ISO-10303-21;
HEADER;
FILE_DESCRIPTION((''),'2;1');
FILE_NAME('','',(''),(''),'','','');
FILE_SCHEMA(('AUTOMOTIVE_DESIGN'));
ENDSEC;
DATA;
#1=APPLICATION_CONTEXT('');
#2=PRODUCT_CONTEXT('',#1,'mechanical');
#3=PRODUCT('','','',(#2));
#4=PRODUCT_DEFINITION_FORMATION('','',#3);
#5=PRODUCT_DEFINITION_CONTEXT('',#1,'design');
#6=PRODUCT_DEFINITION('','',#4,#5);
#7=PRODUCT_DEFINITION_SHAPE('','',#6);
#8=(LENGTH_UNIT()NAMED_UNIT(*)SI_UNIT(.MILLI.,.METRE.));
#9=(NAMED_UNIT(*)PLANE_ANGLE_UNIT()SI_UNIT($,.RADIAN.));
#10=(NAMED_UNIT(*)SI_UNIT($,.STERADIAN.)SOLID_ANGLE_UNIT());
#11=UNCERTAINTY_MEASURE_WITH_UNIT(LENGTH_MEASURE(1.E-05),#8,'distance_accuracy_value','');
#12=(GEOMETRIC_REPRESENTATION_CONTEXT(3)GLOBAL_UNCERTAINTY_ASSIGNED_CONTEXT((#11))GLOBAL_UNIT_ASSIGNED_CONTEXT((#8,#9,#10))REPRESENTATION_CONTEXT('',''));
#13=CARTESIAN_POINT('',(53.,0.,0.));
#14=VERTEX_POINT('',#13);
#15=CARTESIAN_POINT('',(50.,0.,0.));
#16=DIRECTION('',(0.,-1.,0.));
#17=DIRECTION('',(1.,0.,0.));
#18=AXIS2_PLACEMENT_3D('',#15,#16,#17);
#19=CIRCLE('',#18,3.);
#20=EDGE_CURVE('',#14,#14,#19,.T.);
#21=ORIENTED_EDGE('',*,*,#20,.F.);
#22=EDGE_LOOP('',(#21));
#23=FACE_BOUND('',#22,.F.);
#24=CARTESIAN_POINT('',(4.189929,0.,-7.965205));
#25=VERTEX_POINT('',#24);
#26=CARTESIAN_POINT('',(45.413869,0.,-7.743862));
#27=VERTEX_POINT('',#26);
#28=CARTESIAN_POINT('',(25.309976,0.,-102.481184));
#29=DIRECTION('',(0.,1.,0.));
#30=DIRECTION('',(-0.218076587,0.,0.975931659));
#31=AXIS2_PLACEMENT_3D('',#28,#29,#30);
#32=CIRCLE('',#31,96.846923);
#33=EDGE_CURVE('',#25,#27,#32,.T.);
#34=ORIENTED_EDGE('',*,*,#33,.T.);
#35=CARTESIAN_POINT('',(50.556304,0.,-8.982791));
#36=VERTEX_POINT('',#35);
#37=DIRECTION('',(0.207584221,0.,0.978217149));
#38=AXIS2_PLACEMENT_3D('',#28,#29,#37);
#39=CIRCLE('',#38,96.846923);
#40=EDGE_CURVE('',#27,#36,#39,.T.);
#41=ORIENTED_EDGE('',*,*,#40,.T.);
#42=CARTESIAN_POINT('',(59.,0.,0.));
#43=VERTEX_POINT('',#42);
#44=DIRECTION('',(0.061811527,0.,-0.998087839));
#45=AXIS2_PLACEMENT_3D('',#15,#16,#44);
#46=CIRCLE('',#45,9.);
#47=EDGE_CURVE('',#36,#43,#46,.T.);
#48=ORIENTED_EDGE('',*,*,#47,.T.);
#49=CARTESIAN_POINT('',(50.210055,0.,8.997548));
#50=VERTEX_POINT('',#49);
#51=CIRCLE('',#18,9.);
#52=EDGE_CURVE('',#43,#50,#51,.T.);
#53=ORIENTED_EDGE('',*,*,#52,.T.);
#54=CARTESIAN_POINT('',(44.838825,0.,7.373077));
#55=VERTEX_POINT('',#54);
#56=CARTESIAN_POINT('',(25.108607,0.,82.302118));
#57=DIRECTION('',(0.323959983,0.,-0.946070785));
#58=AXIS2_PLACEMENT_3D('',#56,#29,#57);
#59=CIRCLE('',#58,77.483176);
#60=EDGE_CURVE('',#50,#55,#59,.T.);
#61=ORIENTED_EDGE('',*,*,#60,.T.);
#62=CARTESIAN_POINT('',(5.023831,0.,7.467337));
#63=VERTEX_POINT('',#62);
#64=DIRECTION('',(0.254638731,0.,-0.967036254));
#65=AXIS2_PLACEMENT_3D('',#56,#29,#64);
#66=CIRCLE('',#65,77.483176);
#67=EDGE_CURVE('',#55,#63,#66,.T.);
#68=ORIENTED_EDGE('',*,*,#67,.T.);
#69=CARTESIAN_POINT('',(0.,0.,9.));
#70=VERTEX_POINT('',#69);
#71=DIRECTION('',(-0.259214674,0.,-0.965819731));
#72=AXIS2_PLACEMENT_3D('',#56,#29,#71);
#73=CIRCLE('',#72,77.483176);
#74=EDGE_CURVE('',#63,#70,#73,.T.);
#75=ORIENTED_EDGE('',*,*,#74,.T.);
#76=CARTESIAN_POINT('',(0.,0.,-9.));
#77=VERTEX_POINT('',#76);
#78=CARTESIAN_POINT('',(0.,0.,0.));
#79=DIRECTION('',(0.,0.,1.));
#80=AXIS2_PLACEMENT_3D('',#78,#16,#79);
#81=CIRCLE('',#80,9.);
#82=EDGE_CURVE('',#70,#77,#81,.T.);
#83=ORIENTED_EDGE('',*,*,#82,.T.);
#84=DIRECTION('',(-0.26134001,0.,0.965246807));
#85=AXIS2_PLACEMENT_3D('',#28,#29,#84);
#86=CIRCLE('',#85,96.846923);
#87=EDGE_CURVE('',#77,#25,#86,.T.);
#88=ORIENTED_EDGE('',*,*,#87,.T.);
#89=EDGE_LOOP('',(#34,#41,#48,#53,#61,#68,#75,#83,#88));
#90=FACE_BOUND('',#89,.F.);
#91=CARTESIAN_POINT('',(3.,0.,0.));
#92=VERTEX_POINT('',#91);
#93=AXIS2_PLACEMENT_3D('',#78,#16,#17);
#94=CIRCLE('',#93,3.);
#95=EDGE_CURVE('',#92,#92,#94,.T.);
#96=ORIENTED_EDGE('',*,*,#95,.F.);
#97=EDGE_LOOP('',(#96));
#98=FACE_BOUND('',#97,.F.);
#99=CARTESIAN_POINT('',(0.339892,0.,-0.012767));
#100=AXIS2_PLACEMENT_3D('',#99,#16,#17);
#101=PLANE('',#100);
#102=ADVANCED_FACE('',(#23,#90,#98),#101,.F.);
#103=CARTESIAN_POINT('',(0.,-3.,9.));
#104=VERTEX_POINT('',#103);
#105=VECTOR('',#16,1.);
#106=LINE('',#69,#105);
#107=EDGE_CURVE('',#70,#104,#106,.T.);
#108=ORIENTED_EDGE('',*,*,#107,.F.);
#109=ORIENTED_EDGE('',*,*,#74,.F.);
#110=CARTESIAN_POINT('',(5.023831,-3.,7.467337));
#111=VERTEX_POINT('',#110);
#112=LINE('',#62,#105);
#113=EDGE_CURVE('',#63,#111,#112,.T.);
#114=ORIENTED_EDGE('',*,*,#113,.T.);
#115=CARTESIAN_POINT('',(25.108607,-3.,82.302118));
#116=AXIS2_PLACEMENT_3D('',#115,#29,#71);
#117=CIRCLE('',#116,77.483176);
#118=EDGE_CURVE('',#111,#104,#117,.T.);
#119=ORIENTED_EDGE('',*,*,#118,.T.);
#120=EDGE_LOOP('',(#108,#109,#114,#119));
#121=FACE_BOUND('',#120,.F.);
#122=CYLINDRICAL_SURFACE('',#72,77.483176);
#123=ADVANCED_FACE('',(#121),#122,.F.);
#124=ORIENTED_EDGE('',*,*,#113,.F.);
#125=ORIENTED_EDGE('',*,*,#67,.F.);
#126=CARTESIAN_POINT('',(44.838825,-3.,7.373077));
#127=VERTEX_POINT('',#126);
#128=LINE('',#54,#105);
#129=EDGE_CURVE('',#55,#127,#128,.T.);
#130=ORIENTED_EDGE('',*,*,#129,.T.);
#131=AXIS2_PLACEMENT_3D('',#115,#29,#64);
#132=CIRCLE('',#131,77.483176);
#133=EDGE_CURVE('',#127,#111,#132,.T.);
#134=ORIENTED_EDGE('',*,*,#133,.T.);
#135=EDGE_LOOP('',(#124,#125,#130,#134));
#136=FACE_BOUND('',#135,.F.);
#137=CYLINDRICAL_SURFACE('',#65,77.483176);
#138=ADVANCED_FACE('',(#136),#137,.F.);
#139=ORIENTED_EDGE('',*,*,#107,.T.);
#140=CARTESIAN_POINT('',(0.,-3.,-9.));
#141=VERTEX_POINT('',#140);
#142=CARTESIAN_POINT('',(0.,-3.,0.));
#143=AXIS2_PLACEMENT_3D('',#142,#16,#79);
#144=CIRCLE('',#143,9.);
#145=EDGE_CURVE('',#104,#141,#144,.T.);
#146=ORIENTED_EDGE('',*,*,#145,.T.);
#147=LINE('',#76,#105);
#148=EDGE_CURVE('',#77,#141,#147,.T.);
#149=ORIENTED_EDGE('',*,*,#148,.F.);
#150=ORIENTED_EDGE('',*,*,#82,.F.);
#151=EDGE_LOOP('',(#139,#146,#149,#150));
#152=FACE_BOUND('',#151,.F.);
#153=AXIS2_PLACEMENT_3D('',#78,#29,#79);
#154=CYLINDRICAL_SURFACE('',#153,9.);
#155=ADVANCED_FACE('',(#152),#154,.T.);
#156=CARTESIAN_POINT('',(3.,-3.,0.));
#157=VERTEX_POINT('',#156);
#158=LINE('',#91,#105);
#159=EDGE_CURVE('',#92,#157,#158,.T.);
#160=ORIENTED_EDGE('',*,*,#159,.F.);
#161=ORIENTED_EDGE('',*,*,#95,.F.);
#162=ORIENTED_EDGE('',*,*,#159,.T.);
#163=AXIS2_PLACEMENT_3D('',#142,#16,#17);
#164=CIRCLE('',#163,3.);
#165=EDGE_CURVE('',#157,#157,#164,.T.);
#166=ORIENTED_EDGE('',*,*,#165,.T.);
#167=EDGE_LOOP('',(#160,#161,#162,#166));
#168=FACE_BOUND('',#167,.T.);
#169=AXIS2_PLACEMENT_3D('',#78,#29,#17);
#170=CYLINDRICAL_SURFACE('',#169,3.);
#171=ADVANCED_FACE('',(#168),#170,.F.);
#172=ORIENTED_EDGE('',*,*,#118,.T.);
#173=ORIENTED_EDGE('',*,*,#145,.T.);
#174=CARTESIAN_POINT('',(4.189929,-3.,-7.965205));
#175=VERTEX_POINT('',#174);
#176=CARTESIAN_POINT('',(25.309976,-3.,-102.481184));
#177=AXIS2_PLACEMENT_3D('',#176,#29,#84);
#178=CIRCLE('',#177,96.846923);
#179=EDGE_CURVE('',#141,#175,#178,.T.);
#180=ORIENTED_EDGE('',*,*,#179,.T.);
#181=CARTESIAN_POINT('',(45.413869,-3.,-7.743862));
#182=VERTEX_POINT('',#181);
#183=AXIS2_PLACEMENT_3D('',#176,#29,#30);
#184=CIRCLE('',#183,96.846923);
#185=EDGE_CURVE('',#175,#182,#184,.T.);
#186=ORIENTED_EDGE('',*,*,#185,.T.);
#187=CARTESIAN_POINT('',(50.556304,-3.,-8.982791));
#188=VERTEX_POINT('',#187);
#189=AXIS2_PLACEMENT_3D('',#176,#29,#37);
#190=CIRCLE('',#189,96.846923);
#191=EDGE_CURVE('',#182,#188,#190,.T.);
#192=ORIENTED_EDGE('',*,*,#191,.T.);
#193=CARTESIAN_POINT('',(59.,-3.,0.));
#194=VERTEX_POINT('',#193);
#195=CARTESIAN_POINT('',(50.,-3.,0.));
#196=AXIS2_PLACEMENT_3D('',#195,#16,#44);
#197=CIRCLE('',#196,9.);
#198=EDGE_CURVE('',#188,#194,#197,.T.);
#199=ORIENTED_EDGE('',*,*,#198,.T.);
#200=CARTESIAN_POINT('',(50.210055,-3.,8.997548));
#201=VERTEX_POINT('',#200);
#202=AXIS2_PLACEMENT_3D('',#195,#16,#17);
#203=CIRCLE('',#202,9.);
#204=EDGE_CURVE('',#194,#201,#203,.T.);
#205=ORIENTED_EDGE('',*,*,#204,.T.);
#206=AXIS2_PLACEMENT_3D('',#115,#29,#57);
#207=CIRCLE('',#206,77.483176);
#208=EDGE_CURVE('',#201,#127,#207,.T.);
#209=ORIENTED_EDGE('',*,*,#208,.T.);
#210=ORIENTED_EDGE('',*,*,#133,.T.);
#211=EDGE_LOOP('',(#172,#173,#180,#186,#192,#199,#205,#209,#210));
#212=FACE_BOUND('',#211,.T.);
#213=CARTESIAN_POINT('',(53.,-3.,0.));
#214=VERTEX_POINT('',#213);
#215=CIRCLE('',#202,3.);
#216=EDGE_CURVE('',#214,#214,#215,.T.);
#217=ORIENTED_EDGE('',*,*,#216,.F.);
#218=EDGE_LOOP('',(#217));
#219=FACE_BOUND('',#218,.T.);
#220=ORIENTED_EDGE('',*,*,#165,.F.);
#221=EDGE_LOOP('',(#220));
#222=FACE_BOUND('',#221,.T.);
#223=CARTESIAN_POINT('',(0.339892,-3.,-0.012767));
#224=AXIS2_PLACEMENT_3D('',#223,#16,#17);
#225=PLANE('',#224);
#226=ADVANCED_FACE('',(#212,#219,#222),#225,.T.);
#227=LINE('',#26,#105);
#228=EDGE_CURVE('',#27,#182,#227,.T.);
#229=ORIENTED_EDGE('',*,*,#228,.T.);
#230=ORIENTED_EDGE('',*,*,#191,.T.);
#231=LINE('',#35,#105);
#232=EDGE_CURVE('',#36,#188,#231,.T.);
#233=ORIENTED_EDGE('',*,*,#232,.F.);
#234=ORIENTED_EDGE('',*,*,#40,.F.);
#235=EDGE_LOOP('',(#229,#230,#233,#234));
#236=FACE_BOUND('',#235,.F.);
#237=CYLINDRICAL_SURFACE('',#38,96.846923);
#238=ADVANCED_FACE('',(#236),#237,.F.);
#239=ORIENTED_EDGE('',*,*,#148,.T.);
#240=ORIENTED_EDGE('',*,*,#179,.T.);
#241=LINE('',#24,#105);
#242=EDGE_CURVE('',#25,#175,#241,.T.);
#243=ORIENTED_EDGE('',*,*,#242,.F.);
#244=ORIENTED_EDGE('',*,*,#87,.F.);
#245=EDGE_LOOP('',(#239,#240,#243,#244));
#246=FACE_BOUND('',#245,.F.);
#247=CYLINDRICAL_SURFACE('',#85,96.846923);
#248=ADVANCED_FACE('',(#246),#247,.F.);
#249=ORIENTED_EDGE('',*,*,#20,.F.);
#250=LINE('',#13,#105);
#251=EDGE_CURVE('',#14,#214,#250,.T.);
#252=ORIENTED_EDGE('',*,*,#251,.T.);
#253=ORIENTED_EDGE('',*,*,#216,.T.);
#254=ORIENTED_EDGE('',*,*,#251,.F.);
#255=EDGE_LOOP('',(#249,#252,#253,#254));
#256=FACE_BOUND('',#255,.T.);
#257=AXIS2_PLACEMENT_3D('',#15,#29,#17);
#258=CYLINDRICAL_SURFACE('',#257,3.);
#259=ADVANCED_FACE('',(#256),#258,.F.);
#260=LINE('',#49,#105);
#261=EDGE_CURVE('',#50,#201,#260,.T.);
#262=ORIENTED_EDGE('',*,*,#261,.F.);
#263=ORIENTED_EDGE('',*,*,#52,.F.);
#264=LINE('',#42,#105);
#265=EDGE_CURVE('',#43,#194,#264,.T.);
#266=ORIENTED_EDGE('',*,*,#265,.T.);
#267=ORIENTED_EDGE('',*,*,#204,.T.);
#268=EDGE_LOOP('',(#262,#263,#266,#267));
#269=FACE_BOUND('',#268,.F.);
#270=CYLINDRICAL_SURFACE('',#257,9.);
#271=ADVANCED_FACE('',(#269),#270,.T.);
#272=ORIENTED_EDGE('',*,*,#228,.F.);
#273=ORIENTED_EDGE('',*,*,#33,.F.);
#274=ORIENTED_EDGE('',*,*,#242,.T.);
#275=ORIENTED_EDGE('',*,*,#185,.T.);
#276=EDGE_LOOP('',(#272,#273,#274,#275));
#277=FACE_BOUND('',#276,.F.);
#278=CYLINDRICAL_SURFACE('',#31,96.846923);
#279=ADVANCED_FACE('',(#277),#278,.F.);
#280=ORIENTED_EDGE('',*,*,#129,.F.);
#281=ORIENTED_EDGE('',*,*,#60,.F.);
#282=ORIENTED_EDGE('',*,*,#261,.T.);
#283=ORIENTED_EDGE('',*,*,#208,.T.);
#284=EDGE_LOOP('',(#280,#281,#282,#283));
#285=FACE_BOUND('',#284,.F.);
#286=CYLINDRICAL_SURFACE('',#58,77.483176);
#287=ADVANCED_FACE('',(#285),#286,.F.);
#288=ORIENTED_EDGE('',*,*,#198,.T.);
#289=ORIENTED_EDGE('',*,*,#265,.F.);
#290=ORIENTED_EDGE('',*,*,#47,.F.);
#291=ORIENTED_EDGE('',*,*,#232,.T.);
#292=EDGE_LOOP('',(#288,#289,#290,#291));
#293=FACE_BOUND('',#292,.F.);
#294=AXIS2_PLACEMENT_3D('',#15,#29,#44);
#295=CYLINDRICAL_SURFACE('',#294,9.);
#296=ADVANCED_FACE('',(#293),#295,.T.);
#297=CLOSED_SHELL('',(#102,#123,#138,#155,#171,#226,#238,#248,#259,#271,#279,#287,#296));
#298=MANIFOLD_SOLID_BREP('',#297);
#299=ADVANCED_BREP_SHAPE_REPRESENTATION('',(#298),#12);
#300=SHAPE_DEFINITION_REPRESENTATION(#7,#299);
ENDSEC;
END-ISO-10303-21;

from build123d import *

# Parameters (mm, degrees)
F0_R     = 3
F1_DEPTH = 3


with BuildPart() as f1:
    # F0 (on Front) → F1 (new body)
    with BuildSketch(Plane.XZ):
        with BuildLine():
            ThreePointArc((5.0238306032, 7.4673372811), (2.4989245726, 8.1910870463), (0, 9))
            ThreePointArc((0, 9), (-9, 0), (0, -9))
            ThreePointArc((0, -9), (2.0891997796, -8.459259966), (4.1899294664, -7.9652050235))
            ThreePointArc((4.1899294664, -7.9652050235), (7.7041990238, -4.6524528371), (9, 0))
            ThreePointArc((9, 0), (7.944006402, 4.2299837217), (5.0238306032, 7.4673372811))
        make_face()
        Circle(F0_R, mode=Mode.SUBTRACT)
        with BuildLine():
            ThreePointArc((44.8388245261, 7.3730772224), (24.9251697087, 4.8191586202), (5.0238306032, 7.4673372811))
            ThreePointArc((5.0238306032, 7.4673372811), (7.944006402, 4.2299837217), (9, 0))
            ThreePointArc((9, 0), (7.7041990238, -4.6524528371), (4.1899294664, -7.9652050235))
            ThreePointArc((4.1899294664, -7.9652050235), (24.7899854963, -5.6356561903), (45.4138690609, -7.7438622799))
            ThreePointArc((45.4138690609, -7.7438622799), (41.0065045418, -0.3421102804), (44.8388245261, 7.3730772224))
        make_face()
        with BuildLine():
            ThreePointArc((50.2100552652, 8.9975483764), (47.5391507079, 8.1366722514), (44.8388245261, 7.3730772224))
            ThreePointArc((44.8388245261, 7.3730772224), (41.0065045418, -0.3421102804), (45.4138690609, -7.7438622799))
            ThreePointArc((45.4138690609, -7.7438622799), (47.9935464321, -8.3282112662), (50.5563037426, -8.9827905545))
            ThreePointArc((50.5563037426, -8.9827905545), (56.5576952386, -6.16414091), (59, 0))
            ThreePointArc((59, 0), (56.4377984353, 6.2892568167), (50.2100552652, 8.9975483764))
        make_face()
        with Locations((50, 0)):
            Circle(F0_R, mode=Mode.SUBTRACT)
    extrude(amount=F1_DEPTH)


solid = f1.part
